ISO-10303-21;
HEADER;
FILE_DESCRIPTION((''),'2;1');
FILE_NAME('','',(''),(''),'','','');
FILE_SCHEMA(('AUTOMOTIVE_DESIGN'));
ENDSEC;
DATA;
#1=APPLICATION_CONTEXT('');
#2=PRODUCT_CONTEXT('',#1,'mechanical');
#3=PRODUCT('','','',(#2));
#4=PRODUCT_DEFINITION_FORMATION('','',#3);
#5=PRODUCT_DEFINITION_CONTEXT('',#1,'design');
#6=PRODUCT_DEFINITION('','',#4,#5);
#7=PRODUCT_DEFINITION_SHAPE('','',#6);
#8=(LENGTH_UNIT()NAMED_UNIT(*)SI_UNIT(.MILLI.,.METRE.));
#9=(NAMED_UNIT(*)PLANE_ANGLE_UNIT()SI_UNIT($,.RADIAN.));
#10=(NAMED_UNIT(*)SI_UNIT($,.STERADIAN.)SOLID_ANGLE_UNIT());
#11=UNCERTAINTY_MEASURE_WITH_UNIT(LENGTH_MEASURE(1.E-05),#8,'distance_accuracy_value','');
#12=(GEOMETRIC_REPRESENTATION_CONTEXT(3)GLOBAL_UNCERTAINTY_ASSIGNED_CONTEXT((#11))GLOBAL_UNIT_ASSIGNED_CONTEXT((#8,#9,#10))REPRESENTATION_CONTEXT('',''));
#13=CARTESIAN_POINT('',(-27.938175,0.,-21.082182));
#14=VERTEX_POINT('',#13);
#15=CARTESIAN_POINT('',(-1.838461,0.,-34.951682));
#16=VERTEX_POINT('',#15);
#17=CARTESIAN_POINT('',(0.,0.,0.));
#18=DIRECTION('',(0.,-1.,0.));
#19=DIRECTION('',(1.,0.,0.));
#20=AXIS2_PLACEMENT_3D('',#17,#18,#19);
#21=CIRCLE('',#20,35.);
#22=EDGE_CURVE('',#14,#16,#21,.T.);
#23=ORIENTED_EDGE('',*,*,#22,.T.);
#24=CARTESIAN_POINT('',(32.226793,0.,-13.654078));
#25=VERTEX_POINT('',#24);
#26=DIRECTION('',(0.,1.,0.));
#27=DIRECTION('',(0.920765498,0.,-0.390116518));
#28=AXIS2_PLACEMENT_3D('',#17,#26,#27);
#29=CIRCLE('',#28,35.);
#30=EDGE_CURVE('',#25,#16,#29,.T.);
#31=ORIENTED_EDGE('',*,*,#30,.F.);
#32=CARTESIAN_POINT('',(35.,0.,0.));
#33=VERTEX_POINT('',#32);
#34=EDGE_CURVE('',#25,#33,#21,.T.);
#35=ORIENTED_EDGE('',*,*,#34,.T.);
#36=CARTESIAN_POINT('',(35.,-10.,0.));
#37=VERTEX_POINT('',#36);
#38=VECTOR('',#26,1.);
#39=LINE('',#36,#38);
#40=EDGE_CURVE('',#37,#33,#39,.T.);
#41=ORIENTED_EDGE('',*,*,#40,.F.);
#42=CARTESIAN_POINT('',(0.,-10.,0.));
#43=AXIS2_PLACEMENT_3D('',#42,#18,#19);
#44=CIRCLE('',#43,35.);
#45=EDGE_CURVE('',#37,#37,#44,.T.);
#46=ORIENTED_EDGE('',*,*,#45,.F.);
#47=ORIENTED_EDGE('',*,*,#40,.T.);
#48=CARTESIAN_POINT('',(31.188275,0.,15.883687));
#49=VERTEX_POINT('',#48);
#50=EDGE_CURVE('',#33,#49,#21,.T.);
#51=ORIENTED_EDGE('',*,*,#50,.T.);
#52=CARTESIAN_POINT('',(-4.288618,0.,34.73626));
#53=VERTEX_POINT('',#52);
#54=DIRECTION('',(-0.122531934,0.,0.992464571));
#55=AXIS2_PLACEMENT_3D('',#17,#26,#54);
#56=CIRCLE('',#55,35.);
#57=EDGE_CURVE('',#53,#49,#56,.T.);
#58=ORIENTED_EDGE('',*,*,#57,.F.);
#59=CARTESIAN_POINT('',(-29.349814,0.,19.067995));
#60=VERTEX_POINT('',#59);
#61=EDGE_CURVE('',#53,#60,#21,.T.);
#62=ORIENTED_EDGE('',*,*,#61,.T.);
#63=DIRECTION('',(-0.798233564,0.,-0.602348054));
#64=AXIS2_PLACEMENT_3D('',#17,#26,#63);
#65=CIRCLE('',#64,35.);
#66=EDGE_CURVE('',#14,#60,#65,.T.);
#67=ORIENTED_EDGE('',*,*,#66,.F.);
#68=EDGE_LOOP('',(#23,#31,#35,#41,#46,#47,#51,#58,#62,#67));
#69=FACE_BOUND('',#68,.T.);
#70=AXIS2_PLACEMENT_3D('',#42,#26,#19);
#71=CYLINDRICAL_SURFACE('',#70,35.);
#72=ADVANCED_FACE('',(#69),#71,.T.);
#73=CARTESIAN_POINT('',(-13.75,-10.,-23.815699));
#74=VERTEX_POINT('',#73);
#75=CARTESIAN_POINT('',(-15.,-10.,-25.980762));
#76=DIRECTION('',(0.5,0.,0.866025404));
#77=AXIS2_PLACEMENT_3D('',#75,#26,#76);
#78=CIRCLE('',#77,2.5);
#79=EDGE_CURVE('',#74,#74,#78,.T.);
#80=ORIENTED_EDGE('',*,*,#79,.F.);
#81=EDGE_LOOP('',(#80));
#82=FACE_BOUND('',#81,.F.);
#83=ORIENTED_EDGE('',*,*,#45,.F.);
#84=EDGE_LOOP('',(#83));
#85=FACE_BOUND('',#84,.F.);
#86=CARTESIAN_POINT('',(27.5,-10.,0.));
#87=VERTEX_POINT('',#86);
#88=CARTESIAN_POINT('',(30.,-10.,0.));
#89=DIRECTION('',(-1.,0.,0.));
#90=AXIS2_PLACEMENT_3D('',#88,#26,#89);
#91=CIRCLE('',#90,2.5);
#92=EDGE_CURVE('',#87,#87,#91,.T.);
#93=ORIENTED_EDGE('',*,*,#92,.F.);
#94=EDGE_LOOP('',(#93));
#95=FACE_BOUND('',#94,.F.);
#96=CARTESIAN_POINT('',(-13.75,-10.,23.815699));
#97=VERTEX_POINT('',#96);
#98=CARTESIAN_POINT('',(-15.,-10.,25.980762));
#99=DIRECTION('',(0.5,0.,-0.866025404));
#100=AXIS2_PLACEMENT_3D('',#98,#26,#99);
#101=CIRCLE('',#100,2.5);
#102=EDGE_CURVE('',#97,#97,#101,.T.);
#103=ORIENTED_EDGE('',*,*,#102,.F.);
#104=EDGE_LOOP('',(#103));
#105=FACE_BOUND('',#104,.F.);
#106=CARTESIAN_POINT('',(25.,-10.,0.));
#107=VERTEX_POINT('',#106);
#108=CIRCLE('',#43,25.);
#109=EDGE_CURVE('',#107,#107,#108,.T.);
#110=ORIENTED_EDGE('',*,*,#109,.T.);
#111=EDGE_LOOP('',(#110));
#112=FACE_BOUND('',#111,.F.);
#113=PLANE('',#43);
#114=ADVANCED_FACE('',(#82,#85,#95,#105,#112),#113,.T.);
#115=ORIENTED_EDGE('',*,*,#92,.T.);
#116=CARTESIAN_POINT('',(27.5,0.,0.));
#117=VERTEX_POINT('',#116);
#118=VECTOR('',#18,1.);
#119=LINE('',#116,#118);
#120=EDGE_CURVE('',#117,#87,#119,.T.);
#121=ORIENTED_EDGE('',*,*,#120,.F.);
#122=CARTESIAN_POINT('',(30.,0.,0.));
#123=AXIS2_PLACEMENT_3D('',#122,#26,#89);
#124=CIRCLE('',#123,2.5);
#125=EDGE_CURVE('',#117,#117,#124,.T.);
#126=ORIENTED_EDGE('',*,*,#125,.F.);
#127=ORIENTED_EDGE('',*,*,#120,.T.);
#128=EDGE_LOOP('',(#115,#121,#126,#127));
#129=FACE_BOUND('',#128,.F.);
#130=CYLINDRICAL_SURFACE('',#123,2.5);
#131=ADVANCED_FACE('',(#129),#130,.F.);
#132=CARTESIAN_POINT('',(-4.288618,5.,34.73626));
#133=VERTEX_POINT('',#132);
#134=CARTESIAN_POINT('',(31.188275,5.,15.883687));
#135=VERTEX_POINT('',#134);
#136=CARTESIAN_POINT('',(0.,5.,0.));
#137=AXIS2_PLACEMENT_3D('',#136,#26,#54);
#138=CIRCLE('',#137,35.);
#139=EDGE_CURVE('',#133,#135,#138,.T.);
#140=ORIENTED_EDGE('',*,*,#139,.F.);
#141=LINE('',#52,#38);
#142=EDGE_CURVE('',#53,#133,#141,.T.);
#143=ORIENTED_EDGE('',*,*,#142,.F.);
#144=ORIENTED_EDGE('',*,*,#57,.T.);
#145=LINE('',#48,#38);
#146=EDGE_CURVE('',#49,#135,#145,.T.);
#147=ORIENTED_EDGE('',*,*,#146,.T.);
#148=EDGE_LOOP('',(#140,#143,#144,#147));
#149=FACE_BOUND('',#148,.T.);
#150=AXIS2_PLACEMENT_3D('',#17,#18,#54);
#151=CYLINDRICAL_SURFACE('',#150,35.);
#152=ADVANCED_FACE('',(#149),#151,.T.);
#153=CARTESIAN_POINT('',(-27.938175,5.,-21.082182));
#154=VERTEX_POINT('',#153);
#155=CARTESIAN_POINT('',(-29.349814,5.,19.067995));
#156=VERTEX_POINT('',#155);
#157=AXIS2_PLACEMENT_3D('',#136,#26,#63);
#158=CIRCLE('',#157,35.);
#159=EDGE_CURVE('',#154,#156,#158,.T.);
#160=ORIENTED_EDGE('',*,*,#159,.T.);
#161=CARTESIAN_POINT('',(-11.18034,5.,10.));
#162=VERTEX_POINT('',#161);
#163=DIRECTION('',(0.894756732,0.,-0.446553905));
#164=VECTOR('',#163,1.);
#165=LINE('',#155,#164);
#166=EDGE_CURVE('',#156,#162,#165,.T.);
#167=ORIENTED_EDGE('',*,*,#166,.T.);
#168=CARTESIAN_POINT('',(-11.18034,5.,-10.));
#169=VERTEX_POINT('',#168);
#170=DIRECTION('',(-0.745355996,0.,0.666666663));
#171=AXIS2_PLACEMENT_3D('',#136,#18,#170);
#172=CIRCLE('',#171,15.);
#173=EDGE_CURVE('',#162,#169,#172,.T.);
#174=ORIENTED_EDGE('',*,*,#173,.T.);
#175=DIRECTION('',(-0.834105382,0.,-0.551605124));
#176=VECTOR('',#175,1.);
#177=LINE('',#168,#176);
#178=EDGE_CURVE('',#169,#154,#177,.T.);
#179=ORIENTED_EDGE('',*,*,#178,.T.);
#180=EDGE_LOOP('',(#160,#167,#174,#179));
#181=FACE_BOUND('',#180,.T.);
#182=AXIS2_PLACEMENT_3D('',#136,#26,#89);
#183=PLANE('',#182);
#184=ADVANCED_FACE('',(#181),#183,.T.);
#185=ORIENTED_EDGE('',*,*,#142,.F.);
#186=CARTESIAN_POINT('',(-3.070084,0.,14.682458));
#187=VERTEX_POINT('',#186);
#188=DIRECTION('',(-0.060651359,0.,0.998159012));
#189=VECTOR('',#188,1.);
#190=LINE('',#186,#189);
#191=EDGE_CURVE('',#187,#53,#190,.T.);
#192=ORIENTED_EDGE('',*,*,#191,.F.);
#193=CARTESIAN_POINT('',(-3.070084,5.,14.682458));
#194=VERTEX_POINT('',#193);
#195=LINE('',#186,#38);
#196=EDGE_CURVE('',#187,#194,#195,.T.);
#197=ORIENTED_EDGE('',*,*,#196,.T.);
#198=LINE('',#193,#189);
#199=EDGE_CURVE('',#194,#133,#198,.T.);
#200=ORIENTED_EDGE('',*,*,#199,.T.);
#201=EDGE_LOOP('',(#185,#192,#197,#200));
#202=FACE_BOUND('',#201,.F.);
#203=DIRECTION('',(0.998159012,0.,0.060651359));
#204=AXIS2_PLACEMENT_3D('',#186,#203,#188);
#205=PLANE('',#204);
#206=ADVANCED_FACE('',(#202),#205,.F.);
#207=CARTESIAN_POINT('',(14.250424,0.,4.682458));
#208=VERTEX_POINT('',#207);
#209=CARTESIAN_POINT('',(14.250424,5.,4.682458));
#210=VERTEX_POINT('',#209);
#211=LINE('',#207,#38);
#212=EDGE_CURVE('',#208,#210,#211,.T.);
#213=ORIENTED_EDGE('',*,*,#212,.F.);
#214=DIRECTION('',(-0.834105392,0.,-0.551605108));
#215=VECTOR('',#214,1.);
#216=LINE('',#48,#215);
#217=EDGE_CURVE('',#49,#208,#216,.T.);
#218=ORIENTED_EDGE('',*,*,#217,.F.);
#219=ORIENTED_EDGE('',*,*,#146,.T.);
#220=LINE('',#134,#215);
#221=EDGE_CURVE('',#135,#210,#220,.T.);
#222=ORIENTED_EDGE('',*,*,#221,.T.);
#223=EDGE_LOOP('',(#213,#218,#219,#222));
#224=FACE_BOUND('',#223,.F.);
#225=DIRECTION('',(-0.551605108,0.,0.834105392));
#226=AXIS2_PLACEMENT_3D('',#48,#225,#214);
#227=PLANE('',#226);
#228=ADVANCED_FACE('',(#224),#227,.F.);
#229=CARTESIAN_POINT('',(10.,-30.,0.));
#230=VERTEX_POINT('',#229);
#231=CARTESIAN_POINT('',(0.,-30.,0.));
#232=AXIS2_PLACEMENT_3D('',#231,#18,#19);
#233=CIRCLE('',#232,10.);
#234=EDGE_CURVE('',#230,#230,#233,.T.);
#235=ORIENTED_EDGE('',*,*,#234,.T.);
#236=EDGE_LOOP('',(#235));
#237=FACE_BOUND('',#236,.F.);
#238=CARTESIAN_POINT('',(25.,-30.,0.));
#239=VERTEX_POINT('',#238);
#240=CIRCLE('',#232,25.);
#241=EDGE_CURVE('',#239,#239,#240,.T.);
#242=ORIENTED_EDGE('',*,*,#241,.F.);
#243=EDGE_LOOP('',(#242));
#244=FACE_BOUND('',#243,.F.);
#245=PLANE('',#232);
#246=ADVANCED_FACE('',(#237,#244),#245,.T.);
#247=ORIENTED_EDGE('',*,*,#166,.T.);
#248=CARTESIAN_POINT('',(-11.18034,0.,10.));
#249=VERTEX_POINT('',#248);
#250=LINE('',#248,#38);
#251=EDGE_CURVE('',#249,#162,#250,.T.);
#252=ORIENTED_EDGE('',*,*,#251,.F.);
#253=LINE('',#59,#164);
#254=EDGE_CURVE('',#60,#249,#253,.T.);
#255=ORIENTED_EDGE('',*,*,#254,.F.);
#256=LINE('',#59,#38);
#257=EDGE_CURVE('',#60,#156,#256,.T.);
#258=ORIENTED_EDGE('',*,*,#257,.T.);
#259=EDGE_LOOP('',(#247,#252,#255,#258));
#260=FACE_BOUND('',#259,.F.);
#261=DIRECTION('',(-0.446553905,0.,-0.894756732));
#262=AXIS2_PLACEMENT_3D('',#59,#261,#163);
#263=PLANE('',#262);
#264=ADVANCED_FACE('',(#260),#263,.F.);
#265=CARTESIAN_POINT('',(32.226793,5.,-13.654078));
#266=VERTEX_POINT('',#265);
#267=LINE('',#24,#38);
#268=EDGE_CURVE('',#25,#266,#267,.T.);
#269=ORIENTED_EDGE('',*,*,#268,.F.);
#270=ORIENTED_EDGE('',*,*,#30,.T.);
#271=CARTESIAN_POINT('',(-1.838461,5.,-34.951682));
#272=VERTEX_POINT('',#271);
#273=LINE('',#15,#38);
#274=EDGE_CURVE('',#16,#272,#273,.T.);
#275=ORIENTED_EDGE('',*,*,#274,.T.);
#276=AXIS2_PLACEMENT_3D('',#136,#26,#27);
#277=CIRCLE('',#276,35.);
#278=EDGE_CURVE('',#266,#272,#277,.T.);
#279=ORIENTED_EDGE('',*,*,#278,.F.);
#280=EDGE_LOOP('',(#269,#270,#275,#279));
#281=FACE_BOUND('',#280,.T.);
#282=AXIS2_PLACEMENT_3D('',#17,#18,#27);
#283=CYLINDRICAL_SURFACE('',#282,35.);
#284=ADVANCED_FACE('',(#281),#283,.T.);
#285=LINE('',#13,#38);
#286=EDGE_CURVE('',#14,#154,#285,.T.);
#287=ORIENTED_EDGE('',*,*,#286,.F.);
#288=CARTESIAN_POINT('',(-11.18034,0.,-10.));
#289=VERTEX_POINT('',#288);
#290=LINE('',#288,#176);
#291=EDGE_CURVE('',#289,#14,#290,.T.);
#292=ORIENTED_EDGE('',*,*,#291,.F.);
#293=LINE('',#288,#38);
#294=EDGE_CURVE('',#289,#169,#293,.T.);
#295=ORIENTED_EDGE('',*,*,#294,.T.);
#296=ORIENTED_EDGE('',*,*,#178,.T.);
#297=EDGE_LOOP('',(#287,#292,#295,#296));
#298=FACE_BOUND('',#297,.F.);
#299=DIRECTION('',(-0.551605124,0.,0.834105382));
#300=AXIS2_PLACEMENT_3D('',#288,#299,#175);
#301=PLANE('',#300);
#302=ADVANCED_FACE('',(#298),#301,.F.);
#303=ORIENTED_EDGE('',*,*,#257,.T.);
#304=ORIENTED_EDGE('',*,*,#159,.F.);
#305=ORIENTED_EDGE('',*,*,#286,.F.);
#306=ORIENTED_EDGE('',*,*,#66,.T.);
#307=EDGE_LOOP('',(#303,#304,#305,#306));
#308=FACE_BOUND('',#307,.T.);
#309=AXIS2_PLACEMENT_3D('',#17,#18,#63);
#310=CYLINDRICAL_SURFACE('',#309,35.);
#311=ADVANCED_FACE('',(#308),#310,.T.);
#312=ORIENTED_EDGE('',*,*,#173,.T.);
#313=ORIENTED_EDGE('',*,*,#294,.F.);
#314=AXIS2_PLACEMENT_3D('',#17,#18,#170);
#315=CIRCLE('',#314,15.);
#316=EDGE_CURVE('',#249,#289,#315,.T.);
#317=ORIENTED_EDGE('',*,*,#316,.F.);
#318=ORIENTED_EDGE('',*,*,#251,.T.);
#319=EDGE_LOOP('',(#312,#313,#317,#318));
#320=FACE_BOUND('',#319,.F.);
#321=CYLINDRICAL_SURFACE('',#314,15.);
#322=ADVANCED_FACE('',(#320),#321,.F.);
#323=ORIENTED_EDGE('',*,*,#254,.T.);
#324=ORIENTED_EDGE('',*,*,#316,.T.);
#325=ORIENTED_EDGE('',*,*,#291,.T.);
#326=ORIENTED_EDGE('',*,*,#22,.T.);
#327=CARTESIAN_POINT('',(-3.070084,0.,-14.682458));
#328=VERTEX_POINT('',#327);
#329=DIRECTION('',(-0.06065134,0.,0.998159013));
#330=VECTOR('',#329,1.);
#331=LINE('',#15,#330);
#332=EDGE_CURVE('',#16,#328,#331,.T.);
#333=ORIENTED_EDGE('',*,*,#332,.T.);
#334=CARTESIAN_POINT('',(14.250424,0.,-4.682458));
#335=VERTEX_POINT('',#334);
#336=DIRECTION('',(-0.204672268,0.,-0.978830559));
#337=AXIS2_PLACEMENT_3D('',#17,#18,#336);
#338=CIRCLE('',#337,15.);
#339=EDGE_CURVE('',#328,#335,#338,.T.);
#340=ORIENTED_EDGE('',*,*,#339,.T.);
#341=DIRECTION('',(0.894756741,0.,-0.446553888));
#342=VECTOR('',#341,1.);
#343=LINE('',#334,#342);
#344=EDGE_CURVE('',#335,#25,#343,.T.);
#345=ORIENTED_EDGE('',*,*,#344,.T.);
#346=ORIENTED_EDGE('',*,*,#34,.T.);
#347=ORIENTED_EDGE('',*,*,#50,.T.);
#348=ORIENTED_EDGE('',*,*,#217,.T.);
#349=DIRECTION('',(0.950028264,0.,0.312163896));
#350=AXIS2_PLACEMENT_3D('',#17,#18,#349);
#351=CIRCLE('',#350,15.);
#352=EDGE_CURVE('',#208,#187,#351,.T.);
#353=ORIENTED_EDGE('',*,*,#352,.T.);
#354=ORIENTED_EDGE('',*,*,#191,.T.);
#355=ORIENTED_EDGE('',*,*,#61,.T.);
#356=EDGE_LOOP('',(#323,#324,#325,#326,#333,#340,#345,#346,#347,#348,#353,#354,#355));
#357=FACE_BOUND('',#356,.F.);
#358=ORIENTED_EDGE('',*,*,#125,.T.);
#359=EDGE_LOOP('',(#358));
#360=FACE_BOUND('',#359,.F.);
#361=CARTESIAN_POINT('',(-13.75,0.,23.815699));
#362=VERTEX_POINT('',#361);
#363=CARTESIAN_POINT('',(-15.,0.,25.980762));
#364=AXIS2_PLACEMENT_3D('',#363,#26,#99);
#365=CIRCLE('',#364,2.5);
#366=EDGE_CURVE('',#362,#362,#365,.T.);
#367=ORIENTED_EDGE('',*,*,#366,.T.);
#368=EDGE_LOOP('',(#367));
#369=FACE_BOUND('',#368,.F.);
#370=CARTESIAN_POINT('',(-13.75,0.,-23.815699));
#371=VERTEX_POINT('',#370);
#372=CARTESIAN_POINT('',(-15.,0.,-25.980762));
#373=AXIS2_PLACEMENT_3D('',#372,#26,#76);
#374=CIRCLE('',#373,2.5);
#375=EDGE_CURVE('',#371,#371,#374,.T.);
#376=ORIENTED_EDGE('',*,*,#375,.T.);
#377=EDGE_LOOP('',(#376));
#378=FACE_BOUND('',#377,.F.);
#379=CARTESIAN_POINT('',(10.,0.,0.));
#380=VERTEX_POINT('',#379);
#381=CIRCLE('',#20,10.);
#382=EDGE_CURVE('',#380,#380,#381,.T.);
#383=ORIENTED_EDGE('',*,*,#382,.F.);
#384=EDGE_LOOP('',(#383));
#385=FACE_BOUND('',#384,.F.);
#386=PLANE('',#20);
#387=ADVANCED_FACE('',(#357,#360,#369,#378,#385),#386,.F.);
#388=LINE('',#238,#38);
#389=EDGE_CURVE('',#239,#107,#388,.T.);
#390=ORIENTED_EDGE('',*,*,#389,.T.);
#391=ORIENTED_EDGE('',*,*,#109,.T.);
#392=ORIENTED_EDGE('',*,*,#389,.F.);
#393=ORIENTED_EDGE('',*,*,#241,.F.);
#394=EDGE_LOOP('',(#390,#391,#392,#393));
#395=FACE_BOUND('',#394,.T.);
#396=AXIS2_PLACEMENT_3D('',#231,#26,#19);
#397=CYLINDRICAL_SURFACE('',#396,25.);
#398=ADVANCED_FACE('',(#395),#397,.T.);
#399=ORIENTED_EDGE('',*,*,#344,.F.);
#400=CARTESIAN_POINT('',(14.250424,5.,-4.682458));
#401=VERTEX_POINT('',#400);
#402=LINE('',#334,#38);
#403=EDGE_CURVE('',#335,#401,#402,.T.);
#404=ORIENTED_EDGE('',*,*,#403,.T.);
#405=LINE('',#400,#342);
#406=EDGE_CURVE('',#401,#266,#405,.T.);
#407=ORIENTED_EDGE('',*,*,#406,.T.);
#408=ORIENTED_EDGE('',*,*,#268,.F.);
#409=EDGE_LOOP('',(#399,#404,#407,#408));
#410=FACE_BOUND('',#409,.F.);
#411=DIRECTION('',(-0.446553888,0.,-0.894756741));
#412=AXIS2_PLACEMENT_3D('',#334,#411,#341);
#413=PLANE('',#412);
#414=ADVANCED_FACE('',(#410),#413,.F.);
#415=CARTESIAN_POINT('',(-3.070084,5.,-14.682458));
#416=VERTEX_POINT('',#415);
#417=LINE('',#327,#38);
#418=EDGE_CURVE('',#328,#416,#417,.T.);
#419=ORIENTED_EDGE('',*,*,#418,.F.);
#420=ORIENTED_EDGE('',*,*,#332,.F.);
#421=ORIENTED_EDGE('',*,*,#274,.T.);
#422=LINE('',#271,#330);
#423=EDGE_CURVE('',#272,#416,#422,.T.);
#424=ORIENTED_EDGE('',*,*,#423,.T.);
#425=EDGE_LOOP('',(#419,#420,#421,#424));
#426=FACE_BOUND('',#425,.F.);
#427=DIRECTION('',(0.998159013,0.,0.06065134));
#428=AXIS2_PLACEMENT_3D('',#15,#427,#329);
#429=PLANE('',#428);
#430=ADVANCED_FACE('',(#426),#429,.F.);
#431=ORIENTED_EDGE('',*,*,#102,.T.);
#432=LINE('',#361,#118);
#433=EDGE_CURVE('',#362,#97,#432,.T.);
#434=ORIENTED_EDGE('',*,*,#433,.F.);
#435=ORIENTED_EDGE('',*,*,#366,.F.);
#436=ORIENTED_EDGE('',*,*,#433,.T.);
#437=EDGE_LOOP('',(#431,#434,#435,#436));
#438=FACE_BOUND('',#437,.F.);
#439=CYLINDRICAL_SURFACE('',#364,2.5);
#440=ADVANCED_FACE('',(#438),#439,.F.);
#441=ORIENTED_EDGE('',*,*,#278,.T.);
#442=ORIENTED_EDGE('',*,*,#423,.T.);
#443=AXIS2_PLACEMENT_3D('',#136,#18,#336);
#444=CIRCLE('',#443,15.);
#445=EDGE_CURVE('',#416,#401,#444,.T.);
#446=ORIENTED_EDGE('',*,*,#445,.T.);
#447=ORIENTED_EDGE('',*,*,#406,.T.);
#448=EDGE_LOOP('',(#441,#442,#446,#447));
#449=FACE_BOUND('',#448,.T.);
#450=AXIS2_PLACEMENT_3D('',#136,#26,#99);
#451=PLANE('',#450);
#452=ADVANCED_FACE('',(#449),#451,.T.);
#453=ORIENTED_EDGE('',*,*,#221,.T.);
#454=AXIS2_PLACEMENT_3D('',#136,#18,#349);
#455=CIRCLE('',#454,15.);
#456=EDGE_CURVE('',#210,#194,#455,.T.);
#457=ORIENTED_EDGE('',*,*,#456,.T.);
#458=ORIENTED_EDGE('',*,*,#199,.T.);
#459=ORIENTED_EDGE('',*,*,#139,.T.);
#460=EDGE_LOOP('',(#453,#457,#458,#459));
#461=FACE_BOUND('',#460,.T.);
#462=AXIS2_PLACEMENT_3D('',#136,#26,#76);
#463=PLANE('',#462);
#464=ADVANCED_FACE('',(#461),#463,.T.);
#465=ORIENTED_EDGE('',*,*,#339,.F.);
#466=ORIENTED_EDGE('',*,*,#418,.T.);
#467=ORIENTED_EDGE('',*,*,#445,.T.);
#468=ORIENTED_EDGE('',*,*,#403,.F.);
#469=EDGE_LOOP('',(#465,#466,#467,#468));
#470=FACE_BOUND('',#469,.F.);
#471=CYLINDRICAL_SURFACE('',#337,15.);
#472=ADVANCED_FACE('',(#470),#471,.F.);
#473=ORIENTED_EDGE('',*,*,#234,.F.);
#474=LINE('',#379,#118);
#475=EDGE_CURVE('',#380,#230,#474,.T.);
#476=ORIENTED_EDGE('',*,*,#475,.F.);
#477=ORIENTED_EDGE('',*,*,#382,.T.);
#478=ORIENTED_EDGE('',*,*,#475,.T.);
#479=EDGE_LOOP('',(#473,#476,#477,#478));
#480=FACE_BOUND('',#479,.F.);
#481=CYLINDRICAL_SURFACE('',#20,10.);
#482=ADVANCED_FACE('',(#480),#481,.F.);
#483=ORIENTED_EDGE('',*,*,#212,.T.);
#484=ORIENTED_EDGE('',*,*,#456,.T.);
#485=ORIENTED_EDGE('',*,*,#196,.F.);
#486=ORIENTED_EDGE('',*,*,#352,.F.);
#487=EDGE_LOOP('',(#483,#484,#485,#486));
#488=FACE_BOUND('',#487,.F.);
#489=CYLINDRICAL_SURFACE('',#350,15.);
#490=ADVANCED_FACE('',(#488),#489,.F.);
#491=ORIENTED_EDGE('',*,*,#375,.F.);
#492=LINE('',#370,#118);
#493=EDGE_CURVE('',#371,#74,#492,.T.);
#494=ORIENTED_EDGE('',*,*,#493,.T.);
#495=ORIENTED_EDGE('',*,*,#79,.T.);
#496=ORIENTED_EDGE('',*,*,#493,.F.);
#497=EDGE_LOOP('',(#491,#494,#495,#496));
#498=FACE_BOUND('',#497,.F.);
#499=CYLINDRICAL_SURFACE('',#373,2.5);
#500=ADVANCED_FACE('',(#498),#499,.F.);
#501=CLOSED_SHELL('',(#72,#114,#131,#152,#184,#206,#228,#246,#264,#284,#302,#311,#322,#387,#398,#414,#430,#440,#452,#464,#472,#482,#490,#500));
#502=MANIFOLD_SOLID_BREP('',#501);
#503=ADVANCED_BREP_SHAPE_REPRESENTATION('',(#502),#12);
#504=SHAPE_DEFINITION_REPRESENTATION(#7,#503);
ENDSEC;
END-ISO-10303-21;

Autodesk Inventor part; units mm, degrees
ref_plane "YZ Plane" through (0, 0, 0) normal (1, 0, 0) x (0, 1, 0)
ref_plane "XZ Plane" through (0, 0, 0) normal (0, 1, 0) x (-1, 0, 0)
ref_plane "XY Plane" through (0, 0, 0) normal (0, 0, 1) x (1, 0, 0)
sketch "Sketch1" plane through (0, 0, 0) normal (0, 0, 1) x (1, 0, 0)
  line L0 (10, 0) -> (35, 0)
  line L1 (35, 0) -> (35, -10)
  line L2 (35, -10) -> (25, -10)
  line L3 (25, -10) -> (25, -30)
  line L4 (25, -30) -> (10, -30)
  line L5 (10, -30) -> (10, 0)
  line L6 (0, 0) -> (0, -47.182838) construction
  dimension "d0" = 10
  dimension "d1" = 20
  dimension "d2" = 35
  dimension "d3" = 10
  dimension "d4" = 10
  dimension "d5" = 0
sketch "Sketch1 outline for Revolution1" plane through (0, 0, 0) normal (0, 0, 1) x (1, 0, 0)
  line L0 (10, 0) -> (10, -30)
  line L1 (35, 0) -> (10, 0)
  line L2 (35, -10) -> (35, 0)
  line L3 (25, -10) -> (35, -10)
  line L4 (25, -30) -> (25, -10)
  line L5 (10, -30) -> (25, -30)
revolve "Revolution1" add sketch "Sketch1 outline for Revolution1" angle 360 about axis through (0, 0, 0) along (0, -1, 0)
sketch "Sketch2" plane through (0, 0, 0) normal (0, 1, 0) x (-1, 0, 0)
  circle A0 centre (0, 0) radius 35
  arc A1 (11.18034, -10) -> (11.18034, 10) centre (0, 0) ccw
  line L0 (11.18034, 10) -> (29.349814, 19.067995)
  circle A2 centre (0, 0) radius 35
  line L1 (11.18034, -10) -> (27.938175, -21.082182)
  arc A3 (27.977577, -21.108239) -> (29.6661, 19.225846) centre (0, 0.265385) ccw
  circle A4 centre (0, 0) radius 10
  dimension "d7" = 30
  dimension "d8" = 60
sketch "Sketch2 outline for Extrusion1" plane through (0, 0, 0) normal (0, 1, 0) x (-1, 0, 0)
  arc A0 (11.18034, 10) -> (11.18034, -10) centre (0, 0) cw
  line L0 (29.349814, 19.067995) -> (11.18034, 10)
  arc A1 (27.938175, -21.082182) -> (29.349814, 19.067995) centre (0, 0) ccw
  line L1 (11.18034, -10) -> (27.938175, -21.082182)
extrude "Extrusion1" add sketch "Sketch2 outline for Extrusion1" along normal blind 5
sketch "Sketch3" plane through (0, 0, 0) normal (0, 1, 0) x (-1, 0, 0)
  circle A0 centre (-30, 0) radius 2.5
  point P0 (0, 0)
  dimension "d11" = 5
  dimension "d12" = 30
sketch "Sketch3 outline for Extrusion2" plane through (0, 0, 0) normal (0, 1, 0) x (-1, 0, 0)
  circle A0 centre (-30, 0) radius 2.5
extrude "Extrusion2" cut sketch "Sketch3 outline for Extrusion2" against normal blind 10
pattern_circular "Circular Pattern1" count 3 over 360 about axis through (0, -15, 0) along (0, -1, 0) of "Extrusion1"
pattern_circular "Circular Pattern2" count 3 over 360 about axis through (0, -15, 0) along (0, -1, 0) of "Extrusion2"
properties part number "P01_Marcos_Uriel_Martinez_Ortiz2" material "Steel ASTM A36"
